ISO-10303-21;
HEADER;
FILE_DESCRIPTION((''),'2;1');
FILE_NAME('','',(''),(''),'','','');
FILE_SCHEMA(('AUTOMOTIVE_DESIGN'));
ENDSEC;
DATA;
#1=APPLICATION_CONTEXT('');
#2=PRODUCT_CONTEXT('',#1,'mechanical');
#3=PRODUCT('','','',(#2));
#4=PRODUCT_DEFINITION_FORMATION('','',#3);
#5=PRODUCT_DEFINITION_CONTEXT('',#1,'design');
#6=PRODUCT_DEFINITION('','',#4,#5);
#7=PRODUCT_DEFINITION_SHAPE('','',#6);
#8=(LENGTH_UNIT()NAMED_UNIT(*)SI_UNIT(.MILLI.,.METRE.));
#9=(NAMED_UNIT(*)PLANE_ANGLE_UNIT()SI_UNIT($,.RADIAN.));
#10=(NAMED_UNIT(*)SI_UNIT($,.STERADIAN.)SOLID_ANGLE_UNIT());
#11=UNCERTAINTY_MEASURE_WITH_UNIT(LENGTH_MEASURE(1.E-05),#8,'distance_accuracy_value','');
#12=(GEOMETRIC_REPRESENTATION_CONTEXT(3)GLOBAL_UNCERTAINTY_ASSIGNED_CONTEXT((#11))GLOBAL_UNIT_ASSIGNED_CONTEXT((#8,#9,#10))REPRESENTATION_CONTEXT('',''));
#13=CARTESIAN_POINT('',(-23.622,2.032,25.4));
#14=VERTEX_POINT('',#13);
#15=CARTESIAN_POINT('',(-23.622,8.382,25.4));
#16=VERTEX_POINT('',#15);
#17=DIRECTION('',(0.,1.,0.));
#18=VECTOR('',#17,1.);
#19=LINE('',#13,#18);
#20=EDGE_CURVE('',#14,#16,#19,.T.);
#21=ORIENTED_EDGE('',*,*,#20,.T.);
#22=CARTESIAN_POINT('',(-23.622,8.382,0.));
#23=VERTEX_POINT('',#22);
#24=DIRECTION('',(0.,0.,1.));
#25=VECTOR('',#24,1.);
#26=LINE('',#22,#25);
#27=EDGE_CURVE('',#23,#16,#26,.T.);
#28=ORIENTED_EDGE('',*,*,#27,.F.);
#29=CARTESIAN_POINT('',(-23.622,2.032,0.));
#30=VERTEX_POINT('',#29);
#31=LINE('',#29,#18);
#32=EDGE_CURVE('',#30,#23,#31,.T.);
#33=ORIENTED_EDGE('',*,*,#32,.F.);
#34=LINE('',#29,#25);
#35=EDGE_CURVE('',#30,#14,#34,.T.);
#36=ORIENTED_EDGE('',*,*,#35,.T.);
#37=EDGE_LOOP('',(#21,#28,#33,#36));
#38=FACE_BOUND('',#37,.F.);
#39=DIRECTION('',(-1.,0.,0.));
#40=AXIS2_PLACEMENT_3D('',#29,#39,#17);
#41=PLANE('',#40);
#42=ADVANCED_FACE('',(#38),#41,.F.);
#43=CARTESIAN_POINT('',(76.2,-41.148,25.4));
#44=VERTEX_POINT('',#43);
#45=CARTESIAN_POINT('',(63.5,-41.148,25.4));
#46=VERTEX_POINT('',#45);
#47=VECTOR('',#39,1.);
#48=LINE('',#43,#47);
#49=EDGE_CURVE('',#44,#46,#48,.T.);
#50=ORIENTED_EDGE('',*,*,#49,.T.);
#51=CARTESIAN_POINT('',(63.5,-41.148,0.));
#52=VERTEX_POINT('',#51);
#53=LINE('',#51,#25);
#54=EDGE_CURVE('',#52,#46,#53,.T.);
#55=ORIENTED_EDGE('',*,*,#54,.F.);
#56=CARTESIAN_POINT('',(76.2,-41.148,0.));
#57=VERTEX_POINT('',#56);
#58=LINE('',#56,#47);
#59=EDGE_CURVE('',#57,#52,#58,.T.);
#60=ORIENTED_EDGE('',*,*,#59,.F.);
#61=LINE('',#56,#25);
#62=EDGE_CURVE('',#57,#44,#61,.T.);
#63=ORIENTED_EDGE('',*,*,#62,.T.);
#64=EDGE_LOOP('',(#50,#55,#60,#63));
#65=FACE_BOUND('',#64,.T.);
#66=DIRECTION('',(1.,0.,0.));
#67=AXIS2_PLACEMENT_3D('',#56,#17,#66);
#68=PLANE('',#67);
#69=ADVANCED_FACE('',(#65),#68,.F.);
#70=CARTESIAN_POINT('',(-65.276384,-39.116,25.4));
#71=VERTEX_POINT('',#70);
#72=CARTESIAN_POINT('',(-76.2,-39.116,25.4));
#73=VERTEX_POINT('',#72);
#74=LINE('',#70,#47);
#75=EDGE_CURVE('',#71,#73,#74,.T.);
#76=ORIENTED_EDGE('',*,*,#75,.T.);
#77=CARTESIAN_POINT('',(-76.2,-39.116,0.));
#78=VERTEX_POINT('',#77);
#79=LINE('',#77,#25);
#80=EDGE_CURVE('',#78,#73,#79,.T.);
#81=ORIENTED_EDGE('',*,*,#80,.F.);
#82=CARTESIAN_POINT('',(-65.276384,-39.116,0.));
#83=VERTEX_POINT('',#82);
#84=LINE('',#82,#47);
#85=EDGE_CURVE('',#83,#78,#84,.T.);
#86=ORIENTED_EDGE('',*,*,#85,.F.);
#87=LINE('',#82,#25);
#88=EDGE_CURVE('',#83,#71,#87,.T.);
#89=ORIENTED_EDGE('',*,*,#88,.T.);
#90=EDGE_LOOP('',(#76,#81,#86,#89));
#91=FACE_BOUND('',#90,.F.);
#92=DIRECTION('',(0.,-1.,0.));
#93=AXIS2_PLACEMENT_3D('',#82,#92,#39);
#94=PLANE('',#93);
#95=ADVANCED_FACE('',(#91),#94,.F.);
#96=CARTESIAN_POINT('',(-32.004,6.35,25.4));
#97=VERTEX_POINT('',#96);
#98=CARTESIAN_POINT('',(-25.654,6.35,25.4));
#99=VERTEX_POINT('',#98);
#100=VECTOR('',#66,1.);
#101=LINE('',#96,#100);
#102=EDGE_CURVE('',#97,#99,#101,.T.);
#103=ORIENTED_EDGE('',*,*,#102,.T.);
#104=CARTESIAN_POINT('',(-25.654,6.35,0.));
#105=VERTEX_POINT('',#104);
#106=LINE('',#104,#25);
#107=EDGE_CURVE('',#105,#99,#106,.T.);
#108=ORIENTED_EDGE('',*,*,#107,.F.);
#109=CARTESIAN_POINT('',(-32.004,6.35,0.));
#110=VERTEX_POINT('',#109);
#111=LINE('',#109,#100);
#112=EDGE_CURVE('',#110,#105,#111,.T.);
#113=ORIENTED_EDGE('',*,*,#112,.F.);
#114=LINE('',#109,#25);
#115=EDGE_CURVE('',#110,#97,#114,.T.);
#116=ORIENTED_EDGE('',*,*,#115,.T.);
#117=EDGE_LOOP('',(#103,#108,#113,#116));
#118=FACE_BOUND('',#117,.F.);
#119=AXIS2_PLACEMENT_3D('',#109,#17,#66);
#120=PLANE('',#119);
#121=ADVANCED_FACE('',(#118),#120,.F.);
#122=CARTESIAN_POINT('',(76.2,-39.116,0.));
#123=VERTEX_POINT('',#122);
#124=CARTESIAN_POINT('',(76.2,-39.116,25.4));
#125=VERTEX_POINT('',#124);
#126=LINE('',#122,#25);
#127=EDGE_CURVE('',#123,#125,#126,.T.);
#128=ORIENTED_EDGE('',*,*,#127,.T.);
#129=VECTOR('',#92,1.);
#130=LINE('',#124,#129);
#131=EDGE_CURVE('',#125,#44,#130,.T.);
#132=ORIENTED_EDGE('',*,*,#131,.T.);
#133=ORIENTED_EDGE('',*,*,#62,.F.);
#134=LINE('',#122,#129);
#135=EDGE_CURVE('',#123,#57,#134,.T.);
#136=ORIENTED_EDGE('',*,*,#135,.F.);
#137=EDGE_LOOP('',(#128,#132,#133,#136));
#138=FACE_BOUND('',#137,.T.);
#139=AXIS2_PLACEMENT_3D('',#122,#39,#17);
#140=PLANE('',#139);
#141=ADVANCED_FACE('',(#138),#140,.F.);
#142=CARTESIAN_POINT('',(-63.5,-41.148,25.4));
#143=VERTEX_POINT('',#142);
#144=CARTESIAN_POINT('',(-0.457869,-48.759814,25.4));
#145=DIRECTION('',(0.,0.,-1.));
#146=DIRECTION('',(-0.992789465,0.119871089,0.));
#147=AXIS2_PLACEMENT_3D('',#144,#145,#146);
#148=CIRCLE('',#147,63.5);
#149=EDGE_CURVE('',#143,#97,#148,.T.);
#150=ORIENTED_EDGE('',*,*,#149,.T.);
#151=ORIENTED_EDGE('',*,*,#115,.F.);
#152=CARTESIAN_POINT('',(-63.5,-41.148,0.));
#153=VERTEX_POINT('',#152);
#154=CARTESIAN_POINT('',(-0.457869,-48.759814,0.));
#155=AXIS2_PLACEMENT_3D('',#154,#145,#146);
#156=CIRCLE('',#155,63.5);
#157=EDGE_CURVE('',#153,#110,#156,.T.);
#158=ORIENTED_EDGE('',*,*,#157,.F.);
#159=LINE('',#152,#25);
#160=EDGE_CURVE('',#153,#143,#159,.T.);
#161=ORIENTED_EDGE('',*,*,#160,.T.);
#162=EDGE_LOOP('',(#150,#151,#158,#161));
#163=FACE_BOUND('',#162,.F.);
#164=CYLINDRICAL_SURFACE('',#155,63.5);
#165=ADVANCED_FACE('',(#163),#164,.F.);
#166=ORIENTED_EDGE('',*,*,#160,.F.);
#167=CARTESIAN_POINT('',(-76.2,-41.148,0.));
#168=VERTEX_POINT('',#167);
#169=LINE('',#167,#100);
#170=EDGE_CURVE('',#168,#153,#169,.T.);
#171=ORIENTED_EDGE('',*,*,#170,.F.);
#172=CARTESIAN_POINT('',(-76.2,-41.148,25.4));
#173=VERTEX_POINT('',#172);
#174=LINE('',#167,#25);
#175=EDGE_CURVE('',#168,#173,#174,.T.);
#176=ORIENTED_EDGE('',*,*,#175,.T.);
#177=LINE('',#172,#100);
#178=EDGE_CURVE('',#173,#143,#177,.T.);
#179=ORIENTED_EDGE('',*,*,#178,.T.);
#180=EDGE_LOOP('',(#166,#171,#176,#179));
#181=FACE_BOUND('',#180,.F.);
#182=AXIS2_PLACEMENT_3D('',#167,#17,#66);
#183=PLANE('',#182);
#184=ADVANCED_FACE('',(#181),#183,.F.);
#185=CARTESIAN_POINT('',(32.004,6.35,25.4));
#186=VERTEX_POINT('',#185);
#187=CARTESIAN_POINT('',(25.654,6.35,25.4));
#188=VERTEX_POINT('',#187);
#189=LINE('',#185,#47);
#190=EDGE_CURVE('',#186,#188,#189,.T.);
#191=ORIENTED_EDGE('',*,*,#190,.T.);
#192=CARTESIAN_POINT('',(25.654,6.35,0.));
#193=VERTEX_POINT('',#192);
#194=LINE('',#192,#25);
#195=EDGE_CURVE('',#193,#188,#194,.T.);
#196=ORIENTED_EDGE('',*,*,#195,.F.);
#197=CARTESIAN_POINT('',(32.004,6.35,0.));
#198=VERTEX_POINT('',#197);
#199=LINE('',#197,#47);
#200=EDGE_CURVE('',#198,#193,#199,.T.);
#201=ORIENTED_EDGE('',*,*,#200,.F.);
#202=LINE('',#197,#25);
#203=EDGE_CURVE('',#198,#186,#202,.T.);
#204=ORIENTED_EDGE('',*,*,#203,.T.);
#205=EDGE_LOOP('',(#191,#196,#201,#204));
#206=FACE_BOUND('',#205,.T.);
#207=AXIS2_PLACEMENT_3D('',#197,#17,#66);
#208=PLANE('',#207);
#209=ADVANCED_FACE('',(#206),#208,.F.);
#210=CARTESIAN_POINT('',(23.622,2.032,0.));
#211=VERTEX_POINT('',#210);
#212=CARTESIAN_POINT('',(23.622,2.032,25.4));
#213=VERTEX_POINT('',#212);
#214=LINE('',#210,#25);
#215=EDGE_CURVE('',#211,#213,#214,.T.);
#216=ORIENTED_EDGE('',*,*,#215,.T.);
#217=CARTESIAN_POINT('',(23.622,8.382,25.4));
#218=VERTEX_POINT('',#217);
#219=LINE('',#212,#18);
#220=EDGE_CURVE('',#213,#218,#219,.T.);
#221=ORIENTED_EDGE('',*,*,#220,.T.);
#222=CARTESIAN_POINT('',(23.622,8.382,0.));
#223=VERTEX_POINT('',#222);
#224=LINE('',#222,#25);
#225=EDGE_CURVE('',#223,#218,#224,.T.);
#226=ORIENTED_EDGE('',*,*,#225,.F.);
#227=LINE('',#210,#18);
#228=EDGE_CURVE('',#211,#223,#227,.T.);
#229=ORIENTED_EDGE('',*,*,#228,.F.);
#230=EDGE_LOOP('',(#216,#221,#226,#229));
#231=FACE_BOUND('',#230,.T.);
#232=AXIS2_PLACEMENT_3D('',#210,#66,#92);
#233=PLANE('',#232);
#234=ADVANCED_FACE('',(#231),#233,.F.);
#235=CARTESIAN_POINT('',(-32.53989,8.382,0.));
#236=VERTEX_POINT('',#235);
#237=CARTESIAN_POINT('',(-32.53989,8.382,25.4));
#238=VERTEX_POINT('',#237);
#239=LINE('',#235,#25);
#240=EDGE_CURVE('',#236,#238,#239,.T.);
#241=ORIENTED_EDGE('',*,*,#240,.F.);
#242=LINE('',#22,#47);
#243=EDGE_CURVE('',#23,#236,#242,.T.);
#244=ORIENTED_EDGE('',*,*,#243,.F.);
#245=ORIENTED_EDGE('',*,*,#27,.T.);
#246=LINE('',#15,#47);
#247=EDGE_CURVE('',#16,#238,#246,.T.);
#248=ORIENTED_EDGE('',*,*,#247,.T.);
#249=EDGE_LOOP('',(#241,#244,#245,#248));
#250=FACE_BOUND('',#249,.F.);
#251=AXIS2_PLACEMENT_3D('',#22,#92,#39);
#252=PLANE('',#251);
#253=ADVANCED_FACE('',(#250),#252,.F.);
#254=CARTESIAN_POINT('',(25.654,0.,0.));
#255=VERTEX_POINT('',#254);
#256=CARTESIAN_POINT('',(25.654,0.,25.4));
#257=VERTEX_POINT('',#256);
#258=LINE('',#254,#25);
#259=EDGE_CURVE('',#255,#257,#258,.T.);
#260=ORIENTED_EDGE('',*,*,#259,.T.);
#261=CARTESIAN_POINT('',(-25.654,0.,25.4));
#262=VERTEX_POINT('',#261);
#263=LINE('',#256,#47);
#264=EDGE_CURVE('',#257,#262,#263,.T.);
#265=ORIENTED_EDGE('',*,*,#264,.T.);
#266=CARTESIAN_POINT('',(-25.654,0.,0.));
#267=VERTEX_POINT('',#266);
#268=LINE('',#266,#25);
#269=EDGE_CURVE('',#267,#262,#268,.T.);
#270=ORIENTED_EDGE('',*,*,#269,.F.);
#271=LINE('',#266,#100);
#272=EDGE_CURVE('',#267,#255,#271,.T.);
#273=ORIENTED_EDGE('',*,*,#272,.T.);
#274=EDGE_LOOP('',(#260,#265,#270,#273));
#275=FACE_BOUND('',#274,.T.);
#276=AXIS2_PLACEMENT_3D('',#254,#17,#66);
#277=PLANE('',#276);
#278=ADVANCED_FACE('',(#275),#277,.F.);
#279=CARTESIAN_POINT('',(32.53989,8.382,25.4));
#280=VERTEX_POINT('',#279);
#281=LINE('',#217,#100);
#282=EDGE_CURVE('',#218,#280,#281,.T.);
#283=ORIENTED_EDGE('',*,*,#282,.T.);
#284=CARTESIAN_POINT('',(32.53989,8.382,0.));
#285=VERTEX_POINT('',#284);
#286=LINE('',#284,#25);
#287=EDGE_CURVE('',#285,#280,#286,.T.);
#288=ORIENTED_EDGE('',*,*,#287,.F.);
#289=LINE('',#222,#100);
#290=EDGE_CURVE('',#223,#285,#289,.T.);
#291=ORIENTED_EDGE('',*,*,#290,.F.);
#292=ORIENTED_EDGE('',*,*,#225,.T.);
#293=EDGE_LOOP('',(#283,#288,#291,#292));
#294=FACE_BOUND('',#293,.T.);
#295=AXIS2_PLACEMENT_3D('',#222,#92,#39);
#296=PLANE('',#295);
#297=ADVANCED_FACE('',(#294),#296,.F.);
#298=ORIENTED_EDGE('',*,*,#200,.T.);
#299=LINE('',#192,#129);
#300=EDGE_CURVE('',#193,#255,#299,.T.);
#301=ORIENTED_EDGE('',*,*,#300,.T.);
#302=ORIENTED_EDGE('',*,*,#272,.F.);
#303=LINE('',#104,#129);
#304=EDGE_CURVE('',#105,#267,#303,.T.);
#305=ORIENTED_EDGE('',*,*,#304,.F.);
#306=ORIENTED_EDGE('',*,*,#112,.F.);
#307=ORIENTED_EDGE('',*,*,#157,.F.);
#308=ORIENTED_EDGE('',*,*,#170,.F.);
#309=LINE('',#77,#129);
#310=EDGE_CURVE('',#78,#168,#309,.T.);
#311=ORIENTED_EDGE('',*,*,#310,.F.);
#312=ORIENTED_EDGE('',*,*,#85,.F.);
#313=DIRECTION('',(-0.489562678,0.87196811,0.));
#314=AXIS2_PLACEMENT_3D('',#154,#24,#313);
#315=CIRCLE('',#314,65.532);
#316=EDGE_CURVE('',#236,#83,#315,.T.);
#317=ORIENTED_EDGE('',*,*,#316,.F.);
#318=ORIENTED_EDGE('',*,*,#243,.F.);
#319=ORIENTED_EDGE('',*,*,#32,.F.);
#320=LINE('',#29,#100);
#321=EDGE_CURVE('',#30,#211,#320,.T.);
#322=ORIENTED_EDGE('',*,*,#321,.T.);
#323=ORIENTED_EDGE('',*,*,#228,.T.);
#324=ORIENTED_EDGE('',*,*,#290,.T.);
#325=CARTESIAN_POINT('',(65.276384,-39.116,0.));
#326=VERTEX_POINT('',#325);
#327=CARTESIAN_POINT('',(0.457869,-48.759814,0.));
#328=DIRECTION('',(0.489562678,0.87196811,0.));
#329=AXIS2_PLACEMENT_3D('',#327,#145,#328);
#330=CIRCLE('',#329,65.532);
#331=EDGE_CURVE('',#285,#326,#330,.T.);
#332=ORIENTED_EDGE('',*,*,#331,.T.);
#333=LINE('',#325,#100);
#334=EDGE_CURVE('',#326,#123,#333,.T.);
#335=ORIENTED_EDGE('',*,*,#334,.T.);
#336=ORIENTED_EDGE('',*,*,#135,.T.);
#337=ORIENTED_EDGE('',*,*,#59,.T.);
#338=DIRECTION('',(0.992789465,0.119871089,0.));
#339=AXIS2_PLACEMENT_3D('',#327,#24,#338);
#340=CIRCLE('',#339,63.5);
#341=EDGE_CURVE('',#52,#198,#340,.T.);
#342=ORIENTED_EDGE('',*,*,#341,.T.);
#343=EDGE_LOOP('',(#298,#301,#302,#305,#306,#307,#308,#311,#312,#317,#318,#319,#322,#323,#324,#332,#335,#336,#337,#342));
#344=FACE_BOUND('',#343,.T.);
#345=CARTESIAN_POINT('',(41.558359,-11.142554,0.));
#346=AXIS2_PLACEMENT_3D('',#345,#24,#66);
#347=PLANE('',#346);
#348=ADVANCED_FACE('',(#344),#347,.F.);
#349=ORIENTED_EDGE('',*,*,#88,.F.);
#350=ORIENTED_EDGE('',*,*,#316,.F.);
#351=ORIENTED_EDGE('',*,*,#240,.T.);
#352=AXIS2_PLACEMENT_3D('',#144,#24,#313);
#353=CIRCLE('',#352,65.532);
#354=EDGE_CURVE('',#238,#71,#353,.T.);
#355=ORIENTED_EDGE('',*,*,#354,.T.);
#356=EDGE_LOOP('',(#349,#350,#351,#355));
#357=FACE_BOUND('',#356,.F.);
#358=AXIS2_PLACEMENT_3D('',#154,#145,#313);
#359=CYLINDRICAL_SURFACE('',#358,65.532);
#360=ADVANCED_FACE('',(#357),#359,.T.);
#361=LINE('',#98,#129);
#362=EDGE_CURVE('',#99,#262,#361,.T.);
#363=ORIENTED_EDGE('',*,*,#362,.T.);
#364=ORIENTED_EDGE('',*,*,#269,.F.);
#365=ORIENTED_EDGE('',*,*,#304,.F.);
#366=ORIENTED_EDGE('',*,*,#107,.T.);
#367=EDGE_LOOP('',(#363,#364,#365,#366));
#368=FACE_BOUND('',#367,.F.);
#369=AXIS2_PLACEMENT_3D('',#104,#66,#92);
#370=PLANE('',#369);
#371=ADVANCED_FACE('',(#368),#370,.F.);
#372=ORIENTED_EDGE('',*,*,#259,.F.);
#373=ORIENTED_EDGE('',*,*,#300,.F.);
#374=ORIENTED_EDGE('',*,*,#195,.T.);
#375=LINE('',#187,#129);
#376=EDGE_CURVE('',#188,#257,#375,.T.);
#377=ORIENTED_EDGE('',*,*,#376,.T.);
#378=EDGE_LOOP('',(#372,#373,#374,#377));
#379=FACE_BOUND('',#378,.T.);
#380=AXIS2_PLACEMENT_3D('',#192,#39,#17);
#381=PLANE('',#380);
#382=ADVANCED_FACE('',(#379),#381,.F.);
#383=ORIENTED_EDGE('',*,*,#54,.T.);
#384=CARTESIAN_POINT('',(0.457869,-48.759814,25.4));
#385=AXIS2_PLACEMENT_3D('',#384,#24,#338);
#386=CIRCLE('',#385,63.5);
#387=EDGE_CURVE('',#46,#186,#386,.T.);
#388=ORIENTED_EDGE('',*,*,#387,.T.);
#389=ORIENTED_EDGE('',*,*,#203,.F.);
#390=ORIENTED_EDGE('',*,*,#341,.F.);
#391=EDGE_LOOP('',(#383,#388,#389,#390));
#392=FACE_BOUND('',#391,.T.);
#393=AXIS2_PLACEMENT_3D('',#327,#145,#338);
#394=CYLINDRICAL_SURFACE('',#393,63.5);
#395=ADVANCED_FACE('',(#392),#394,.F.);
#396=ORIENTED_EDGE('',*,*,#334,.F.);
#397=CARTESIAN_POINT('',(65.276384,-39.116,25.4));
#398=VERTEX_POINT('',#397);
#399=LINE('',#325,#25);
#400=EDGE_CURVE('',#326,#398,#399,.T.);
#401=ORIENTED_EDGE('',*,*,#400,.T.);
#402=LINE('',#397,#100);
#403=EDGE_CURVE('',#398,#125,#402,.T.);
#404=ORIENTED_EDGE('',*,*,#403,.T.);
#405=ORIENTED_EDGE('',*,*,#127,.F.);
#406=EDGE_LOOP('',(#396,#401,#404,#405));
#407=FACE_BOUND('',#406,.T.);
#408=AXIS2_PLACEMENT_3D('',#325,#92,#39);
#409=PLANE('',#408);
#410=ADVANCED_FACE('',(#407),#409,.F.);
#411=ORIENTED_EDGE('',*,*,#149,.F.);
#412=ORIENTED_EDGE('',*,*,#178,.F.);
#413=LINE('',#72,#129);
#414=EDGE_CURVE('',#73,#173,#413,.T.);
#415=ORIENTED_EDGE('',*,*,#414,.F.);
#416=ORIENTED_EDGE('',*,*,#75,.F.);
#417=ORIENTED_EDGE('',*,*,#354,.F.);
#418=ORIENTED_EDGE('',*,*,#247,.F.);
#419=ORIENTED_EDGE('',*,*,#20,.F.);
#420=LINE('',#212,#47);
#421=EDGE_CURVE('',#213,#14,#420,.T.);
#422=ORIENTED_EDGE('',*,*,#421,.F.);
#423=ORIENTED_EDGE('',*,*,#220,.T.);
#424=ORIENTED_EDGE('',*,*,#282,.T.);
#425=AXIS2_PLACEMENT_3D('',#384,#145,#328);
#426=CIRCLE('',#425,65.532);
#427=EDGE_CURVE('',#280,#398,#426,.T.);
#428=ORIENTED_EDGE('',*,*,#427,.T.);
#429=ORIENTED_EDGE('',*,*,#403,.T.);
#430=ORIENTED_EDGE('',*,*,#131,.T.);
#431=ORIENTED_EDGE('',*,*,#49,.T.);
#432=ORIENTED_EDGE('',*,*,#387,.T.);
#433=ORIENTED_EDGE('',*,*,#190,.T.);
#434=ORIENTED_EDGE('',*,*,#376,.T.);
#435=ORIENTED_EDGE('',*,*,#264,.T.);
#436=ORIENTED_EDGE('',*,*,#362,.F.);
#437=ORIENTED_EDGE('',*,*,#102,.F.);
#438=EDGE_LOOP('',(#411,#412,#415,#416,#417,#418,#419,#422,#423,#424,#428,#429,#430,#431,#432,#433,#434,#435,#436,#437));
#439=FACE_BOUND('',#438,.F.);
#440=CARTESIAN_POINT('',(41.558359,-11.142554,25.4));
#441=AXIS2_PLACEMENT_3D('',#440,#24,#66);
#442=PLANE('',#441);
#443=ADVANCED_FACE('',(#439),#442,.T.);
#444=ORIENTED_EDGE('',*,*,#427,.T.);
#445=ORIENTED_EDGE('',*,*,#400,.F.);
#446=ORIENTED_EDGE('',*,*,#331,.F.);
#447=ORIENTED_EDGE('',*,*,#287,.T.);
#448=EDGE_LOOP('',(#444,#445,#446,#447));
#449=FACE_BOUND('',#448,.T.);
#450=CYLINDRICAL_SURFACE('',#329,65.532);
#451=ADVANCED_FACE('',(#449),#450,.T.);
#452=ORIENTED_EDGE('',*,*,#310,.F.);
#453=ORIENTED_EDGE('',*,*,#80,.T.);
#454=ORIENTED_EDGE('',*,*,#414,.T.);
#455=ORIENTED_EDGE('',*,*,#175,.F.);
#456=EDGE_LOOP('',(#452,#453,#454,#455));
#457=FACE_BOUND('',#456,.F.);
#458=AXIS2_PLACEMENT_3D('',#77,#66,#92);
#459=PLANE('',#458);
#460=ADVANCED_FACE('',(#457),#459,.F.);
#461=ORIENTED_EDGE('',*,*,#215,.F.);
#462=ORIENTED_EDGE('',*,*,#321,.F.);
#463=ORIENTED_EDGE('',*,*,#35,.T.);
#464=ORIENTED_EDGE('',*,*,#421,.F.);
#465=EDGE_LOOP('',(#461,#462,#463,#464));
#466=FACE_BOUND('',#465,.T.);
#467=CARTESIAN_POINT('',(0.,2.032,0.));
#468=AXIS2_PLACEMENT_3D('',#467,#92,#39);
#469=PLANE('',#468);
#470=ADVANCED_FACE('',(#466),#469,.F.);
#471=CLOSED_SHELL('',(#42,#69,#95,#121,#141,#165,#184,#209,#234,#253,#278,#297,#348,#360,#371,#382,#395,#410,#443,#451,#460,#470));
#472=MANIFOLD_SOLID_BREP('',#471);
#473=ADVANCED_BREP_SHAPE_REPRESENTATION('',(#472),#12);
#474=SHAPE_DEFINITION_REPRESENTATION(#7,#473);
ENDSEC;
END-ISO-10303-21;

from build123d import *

# Parameters (mm, degrees)
F1_DEPTH = 25.4


# Not quite as in the source:
# - a pattern or mirror of a feature is missing from the dataset's text; its kind, count and spacing are read off the source's solid


with BuildPart() as f1:
    # F0 (on Top) → F1 (new body)
    with BuildSketch(Plane.XY):
        with BuildLine():
            Line((-25.654, 0), (0, 0))
            Line((0, 0), (0, 2.032))
            Line((0, 2.032), (-23.622, 2.032))
            Line((-23.622, 2.032), (-23.622, 8.382))
            Line((-23.622, 8.382), (-32.5398903871, 8.382))
            ThreePointArc((-32.5398903871, 8.382), (-54.4156625214, -11.5711123989), (-65.2763838561, -39.116))
            Line((-65.2763838561, -39.116), (-76.2, -39.116))
            Line((-76.2, -39.116), (-76.2, -41.148))
            Line((-76.2, -41.148), (-63.5, -41.148))
            ThreePointArc((-63.5, -41.148), (-53.3799799525, -13.6670774646), (-32.004, 6.35))
            Line((-32.004, 6.35), (-25.654, 6.35))
            Line((-25.654, 6.35), (-25.654, 0))
        make_face()
    extrude(amount=F1_DEPTH)

    # F1_copies: F1 across plane


with BuildPart() as f1_1:
    add(f1.part)
    add(f1.part.mirror(Plane(origin=(0, 0, 0), x_dir=(0, 0, 1), z_dir=(1, 0, 0))))


solid = f1_1.part
